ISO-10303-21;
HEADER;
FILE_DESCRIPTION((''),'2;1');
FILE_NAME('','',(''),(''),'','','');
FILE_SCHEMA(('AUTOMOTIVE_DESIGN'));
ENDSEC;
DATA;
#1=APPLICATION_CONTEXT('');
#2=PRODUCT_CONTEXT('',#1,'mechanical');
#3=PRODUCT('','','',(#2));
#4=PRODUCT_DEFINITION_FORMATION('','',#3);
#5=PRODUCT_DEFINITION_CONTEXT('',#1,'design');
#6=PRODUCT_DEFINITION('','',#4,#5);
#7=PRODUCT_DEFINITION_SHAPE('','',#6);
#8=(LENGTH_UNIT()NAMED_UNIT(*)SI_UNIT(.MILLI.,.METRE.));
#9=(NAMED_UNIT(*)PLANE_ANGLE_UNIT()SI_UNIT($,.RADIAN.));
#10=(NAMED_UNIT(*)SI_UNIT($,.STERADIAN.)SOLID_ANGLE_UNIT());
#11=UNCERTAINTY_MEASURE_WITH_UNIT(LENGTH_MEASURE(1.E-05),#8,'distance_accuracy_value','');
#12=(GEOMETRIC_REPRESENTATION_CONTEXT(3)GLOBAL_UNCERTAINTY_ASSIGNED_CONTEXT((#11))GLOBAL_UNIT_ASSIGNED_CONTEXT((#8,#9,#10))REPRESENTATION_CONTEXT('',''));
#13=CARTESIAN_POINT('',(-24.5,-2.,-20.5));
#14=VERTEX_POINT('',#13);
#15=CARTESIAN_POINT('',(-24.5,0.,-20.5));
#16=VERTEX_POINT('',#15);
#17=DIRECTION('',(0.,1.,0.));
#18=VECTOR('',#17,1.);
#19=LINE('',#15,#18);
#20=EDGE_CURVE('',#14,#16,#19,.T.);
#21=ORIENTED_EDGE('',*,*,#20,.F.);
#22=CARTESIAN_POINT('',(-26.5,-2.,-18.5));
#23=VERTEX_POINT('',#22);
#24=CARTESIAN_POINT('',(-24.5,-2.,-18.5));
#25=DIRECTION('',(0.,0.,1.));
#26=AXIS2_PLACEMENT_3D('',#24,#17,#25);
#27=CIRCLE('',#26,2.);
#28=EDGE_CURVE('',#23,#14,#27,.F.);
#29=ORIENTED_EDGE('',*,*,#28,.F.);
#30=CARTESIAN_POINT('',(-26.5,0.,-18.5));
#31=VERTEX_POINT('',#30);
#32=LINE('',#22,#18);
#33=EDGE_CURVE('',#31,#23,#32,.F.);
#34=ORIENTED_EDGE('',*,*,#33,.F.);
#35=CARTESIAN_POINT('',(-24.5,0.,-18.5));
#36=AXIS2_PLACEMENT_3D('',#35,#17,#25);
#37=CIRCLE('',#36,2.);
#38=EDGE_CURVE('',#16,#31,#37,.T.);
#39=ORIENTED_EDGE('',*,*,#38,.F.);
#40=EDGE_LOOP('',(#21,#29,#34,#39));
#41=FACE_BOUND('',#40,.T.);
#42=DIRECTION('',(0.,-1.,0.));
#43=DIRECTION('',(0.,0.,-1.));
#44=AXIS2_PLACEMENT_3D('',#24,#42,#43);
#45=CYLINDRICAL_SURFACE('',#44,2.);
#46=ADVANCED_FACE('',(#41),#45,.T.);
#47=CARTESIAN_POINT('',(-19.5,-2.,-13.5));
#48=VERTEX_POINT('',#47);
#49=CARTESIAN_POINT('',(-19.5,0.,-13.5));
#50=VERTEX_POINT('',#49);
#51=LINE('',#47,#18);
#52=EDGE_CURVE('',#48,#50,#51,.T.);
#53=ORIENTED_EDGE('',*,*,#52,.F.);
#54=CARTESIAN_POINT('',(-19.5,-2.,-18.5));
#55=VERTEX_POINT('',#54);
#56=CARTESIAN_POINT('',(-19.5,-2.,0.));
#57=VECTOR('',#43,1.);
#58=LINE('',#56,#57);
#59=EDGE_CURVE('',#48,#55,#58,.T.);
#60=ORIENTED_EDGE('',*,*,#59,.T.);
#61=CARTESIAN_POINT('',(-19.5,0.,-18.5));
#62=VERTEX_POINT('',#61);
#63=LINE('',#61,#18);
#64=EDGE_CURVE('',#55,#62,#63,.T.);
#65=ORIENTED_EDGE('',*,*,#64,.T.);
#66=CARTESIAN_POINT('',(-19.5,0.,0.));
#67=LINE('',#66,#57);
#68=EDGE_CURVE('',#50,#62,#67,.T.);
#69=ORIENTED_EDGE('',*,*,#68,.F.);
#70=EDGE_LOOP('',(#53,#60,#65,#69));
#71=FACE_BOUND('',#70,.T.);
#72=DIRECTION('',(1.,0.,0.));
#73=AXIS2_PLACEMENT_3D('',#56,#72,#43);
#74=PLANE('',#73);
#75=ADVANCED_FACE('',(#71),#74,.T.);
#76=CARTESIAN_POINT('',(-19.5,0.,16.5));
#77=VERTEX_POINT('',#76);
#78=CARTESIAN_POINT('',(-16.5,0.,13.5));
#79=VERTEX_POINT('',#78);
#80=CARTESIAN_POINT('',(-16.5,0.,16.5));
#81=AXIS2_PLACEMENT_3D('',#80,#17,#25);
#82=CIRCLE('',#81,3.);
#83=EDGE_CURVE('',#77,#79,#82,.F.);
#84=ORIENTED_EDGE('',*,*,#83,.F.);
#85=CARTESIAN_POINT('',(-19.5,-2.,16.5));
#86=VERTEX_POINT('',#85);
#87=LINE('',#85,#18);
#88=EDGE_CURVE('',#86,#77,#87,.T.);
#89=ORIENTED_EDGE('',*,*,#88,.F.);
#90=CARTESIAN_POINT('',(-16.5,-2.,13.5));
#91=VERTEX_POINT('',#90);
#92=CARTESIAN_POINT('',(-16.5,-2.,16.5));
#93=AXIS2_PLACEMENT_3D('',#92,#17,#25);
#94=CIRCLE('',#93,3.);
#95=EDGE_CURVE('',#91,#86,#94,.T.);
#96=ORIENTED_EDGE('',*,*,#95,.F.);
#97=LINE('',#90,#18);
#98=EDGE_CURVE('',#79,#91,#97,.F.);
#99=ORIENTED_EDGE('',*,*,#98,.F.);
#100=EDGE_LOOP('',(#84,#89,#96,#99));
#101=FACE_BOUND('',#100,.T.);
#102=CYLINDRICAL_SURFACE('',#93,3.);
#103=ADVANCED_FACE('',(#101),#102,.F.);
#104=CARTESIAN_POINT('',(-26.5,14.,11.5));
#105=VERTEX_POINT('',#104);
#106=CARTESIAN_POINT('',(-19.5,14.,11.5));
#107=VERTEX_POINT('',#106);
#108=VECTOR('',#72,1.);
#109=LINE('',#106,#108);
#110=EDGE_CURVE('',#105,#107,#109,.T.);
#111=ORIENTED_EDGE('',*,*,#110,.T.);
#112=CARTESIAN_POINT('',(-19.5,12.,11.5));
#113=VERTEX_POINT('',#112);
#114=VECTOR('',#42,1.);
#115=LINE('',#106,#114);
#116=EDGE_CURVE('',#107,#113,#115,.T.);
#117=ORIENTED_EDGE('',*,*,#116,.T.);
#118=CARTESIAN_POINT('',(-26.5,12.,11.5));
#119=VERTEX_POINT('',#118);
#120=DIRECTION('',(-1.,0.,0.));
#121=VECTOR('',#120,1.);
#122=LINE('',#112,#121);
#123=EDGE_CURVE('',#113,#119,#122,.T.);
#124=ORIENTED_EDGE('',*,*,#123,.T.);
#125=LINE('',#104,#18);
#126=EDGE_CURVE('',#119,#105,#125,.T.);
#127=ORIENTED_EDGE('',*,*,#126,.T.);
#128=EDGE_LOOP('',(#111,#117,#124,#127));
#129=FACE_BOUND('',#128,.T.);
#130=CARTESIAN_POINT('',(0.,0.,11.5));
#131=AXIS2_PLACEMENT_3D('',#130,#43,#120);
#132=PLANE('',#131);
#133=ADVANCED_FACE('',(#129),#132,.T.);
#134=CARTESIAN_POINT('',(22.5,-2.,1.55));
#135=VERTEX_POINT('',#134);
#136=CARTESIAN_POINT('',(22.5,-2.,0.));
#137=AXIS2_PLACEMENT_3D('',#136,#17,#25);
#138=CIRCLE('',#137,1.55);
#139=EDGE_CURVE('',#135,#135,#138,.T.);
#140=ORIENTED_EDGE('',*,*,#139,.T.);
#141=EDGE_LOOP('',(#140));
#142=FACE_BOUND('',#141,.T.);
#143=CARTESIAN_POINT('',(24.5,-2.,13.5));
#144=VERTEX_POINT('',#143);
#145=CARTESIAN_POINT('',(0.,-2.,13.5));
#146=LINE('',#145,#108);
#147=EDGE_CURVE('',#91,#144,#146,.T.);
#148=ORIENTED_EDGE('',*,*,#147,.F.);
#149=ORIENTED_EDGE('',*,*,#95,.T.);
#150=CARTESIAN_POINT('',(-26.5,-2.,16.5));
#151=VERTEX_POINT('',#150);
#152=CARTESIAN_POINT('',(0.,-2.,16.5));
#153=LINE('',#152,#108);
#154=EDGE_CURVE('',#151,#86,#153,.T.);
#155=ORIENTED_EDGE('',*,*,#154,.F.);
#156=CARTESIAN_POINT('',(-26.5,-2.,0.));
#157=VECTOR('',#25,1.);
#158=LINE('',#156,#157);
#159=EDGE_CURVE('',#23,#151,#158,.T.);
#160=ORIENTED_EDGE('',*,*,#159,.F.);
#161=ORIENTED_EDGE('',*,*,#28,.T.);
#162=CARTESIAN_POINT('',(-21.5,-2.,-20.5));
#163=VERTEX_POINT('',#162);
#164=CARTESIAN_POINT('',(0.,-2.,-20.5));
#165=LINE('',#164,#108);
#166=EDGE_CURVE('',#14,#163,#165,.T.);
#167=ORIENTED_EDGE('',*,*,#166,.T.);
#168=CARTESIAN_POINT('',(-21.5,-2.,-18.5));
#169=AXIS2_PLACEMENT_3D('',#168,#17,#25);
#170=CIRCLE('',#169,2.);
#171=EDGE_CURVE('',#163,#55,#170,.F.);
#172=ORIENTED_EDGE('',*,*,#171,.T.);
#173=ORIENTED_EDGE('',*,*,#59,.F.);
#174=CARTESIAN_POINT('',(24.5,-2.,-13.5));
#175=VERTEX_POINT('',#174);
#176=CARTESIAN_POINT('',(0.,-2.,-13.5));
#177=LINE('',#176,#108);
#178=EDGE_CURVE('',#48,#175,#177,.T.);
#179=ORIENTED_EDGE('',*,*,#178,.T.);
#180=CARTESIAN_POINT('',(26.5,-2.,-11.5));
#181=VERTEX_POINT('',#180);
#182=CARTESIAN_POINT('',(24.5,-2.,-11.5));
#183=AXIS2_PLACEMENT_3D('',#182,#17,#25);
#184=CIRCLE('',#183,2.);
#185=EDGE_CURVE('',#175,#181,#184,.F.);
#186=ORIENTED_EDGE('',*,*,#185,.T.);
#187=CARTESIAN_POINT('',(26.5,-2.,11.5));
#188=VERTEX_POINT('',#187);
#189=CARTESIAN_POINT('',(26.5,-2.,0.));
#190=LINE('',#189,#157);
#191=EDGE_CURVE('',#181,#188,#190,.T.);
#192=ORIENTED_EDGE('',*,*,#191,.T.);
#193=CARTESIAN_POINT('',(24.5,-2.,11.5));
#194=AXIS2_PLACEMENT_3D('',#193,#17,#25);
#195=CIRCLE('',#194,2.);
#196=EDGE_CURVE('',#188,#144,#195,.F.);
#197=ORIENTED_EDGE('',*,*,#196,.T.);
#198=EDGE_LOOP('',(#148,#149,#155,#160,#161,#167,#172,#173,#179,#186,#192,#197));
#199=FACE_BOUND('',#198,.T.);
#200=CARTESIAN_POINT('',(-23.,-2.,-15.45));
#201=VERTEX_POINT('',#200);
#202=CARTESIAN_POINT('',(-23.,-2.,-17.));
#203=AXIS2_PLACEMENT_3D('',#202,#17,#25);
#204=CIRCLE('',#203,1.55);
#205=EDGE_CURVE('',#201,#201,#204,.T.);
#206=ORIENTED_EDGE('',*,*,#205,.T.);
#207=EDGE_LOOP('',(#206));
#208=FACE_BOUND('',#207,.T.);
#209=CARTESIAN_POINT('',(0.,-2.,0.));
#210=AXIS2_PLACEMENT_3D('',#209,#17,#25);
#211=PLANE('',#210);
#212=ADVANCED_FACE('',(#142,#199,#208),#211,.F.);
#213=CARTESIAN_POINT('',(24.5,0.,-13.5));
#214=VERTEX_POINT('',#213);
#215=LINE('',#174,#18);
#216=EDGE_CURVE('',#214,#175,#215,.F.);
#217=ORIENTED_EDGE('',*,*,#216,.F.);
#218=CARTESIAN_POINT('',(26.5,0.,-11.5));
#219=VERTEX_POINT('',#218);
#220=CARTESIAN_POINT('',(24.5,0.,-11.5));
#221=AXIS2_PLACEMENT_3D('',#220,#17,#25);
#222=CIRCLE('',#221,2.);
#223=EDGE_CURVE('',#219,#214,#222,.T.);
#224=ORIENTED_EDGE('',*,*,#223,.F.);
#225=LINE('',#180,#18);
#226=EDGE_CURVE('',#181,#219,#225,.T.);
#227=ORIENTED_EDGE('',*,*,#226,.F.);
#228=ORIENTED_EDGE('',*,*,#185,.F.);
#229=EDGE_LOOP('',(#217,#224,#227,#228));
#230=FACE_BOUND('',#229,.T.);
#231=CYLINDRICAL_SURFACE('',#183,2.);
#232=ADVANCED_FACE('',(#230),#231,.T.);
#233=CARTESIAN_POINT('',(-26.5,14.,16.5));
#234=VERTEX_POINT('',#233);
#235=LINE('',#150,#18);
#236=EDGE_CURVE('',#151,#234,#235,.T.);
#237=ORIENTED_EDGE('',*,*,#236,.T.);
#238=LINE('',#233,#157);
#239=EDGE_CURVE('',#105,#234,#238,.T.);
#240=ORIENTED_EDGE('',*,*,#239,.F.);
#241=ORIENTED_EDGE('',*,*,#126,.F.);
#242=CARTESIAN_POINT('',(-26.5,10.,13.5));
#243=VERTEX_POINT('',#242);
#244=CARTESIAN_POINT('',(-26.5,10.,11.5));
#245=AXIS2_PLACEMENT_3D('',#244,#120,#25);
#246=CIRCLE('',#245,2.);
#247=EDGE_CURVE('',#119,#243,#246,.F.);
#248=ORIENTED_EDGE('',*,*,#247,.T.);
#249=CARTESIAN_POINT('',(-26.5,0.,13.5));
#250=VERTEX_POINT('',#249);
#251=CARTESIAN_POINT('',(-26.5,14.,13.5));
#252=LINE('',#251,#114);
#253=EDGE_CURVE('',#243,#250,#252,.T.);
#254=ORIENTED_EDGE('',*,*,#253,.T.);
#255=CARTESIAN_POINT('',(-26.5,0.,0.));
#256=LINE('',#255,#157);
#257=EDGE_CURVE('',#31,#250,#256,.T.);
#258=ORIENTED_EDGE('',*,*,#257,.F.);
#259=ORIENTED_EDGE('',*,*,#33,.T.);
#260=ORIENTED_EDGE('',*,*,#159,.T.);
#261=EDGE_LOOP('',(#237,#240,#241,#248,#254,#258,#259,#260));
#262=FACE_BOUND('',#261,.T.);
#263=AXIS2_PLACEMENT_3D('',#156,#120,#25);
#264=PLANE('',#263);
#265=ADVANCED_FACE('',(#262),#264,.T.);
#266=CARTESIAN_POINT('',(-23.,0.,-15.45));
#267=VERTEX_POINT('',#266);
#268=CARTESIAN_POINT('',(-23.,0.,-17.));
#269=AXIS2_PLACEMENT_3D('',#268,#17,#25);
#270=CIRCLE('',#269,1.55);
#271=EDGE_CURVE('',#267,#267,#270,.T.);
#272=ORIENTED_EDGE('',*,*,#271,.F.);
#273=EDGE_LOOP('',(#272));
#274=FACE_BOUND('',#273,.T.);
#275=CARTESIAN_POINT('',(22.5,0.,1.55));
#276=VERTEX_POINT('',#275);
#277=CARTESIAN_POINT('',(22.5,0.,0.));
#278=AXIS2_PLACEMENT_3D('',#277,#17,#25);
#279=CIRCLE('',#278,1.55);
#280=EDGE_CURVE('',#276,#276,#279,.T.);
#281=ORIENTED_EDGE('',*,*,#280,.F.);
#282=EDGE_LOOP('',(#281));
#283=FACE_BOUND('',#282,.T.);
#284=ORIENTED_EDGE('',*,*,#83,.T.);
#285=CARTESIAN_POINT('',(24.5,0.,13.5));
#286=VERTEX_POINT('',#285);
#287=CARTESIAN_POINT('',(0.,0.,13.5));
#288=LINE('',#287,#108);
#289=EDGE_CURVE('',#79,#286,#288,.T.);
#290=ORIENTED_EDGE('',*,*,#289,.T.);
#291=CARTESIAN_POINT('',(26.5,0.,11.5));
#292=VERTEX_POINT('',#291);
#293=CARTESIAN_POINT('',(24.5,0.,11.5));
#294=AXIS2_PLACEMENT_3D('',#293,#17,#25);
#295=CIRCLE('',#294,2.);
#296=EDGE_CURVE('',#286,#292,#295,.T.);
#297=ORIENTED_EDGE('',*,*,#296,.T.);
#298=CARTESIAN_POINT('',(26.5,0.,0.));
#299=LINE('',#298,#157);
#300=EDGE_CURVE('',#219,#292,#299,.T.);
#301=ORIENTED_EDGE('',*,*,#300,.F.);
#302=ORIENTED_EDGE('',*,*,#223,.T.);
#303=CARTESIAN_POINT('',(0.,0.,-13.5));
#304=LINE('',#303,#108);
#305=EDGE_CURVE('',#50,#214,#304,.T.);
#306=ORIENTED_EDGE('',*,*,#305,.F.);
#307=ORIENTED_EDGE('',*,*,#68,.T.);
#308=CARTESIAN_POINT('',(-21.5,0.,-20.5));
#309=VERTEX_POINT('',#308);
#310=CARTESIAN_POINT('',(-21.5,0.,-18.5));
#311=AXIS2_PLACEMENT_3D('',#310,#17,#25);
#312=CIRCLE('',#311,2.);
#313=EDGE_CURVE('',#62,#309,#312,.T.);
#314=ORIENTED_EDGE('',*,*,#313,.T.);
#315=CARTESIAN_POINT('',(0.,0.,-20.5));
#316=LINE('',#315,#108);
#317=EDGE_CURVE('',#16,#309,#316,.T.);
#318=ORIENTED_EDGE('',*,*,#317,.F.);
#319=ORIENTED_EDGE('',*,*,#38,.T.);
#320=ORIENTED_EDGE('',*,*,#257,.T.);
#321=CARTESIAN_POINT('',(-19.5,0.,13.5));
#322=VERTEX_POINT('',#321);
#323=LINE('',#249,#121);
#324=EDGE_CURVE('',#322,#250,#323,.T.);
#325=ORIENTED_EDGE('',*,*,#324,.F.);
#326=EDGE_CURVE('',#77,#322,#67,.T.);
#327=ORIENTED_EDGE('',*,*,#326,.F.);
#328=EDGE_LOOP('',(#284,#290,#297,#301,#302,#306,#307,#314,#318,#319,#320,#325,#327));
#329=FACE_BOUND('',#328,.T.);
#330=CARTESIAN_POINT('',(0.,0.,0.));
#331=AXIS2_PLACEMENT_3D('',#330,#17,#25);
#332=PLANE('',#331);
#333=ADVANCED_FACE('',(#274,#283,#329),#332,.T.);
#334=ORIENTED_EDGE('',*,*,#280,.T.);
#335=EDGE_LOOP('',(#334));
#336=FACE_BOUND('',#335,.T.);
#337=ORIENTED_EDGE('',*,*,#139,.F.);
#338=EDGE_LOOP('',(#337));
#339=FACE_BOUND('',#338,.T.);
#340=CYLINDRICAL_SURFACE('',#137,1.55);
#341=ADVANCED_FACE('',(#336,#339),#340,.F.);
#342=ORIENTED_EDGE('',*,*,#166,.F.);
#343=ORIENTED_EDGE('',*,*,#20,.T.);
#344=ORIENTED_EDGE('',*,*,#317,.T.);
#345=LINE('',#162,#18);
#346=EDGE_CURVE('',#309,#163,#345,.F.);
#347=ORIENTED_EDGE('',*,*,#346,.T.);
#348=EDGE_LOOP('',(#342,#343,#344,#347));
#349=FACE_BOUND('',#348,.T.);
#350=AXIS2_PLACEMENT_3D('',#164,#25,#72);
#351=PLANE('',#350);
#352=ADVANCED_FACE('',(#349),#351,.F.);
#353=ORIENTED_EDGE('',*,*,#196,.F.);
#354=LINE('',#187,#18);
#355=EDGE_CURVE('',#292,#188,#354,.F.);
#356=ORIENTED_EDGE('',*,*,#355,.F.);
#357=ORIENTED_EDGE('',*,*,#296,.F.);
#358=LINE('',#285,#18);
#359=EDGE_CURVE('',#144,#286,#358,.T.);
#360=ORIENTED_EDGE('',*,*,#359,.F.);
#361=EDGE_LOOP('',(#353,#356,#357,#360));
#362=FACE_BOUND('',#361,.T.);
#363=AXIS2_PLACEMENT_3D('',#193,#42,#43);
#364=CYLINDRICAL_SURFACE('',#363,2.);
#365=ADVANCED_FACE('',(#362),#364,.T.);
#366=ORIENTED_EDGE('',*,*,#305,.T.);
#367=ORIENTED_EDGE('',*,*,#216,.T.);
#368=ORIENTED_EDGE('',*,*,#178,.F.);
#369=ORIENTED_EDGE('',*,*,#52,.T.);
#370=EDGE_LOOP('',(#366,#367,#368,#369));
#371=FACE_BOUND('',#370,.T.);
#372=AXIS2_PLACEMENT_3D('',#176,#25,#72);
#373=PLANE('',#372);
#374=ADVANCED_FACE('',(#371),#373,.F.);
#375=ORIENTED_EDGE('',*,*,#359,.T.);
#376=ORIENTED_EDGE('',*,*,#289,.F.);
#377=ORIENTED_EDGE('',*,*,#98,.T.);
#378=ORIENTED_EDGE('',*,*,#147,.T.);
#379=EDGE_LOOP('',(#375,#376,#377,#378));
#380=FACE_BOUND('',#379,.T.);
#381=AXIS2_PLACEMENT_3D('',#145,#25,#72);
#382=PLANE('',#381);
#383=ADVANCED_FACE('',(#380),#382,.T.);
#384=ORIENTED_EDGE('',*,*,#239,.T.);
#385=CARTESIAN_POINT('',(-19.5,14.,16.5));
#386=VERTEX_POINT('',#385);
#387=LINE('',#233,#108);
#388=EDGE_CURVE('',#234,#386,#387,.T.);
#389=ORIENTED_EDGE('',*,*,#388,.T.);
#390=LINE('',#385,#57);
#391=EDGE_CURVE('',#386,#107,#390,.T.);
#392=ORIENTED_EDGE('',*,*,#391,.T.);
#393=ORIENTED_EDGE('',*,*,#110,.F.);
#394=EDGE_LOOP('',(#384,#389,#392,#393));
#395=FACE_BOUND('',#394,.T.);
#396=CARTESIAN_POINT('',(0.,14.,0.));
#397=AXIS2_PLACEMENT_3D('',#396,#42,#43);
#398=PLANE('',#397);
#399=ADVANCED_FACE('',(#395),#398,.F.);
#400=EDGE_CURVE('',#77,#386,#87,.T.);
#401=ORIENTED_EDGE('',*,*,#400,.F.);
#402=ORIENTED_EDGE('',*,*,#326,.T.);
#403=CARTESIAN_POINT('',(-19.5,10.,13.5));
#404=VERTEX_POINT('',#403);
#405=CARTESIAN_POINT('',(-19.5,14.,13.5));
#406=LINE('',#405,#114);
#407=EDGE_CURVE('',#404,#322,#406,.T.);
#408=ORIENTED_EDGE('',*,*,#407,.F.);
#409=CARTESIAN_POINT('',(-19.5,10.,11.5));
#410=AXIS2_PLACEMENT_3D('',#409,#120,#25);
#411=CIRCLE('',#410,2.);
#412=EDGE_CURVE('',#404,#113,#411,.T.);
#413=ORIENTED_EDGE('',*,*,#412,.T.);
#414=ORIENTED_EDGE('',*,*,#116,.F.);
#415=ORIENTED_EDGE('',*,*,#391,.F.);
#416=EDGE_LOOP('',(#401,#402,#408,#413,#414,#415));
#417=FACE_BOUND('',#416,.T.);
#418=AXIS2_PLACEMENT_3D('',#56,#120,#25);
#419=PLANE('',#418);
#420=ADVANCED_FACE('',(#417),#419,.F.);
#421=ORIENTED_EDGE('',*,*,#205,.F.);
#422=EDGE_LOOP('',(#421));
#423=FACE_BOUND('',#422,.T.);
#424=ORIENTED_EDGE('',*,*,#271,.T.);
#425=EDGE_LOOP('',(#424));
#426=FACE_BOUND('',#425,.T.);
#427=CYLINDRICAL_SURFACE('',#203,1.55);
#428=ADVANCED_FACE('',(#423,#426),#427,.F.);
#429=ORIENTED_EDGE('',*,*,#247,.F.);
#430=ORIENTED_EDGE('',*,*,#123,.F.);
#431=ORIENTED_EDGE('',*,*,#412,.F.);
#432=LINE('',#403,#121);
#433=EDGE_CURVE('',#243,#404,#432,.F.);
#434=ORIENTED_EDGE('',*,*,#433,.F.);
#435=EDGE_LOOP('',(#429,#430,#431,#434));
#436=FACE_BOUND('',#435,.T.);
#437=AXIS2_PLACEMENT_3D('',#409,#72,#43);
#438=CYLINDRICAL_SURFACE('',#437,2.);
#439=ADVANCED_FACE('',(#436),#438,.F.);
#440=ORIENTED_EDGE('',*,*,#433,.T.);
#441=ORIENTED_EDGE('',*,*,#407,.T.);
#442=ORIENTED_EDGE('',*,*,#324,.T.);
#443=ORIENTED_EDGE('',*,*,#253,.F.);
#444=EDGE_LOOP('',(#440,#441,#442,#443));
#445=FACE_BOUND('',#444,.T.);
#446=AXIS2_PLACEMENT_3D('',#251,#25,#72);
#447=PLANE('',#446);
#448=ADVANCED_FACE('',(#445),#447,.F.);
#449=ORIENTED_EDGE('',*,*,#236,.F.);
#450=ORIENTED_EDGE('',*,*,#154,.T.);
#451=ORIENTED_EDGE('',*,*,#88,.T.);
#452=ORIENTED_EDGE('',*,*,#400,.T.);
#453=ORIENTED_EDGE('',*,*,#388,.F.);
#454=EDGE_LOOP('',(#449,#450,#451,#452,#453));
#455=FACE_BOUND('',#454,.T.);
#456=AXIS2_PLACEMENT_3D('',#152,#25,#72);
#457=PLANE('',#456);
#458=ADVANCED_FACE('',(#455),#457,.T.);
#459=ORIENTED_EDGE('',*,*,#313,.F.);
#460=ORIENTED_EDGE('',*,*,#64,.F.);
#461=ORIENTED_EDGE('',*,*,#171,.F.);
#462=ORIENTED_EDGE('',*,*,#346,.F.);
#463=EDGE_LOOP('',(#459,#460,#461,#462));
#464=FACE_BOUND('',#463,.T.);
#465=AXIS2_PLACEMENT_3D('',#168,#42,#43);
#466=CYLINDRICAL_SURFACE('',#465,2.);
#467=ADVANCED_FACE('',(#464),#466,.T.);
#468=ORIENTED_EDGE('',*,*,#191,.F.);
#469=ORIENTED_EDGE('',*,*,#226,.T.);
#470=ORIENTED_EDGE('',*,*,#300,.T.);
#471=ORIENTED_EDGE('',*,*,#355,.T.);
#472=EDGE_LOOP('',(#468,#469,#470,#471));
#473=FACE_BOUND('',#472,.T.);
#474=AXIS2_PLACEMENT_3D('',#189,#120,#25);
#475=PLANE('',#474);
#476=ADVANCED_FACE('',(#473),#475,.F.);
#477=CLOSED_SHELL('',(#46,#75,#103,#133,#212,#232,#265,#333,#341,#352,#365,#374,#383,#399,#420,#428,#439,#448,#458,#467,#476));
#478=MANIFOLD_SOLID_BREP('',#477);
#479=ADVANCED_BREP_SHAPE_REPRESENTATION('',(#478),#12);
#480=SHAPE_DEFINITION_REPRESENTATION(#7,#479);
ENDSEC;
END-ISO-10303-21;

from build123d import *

# Parameters (mm, degrees)
ESBO_O1_W                = 7
ESBO_O1_H                = 3
ESBO_O1_W_2              = 53
ESBO_O1_H_2              = 27
ESBO_O1_H_3              = 7
ESBO_O1_R                = 1.55
RESSALTO_EXTRUS_O1_DEPTH = 2
ESBO_O2_W                = 7
ESBO_O2_H                = 3
RESSALTO_EXTRUS_O2_DEPTH = 14
ESBO_O3_W                = 7
ESBO_O3_H                = 2
RESSALTO_EXTRUS_O3_DEPTH = 2
FILETE1_R                = 2
FILETE2_R                = 3
ESBO_O4_R                = 1.55
CORTE_EXTRUS_O1_DEPTH    = 2
FILETE3_R                = 2


with BuildPart() as part:
    # Esboço1 → Ressalto-extrusão1 (new body)
    # profile 1 of 3: a face of its own
    with BuildSketch(Plane(origin=(0, 0, 0), x_dir=(1, 0, 0), z_dir=(0, 1, 0))):
        with Locations((-23, -15)):
            Rectangle(ESBO_O1_W, ESBO_O1_H)
    # profile 2 of 3: a face of its own
    with BuildSketch(Plane(origin=(0, 0, 0), x_dir=(1, 0, 0), z_dir=(0, 1, 0))):
        Rectangle(ESBO_O1_W_2, ESBO_O1_H_2)
    # profile 3 of 3: a face of its own
    with BuildSketch(Plane(origin=(0, 0, 0), x_dir=(1, 0, 0), z_dir=(0, 1, 0))):
        with Locations((-23, 17)):
            Rectangle(ESBO_O1_W, ESBO_O1_H_3)
        with Locations(Location((-23, 17, 0), (0, 0, 270))):
            Circle(ESBO_O1_R, mode=Mode.SUBTRACT)
    extrude(amount=-RESSALTO_EXTRUS_O1_DEPTH)

    # Esboço2 → Ressalto-extrusão2 (add)
    with BuildSketch(Plane(origin=(0, 0, 0), x_dir=(1, 0, 0), z_dir=(0, 1, 0))):
        with Locations((-23, -15)):
            Rectangle(ESBO_O2_W, ESBO_O2_H)
    extrude(amount=RESSALTO_EXTRUS_O2_DEPTH)

    # Esboço3 → Ressalto-extrusão3 (add)
    with BuildSketch(Plane(origin=(0, 0, 13.5), x_dir=(-1, 0, 0), z_dir=(0, 0, -1))):
        with Locations((23, 13)):
            Rectangle(ESBO_O3_W, ESBO_O3_H)
    extrude(amount=RESSALTO_EXTRUS_O3_DEPTH)

    # Filete1
    filete1_edges = [part.edges().sort_by_distance(p)[0] for p in [
        (-23, 12, 13.5),
    ]]
    fillet(filete1_edges, radius=FILETE1_R - 0.0001)  # a hair under: the kernel refuses the full size

    # Filete2
    filete2_edges = [part.edges().sort_by_distance(p)[0] for p in [
        (-19.5, -1, 13.5),
    ]]
    fillet(filete2_edges, radius=FILETE2_R - 0.0001)  # a hair under: the kernel refuses the full size

    # Esboço4 → Corte-extrusão1 (cut)
    with BuildSketch(Plane(origin=(0, 0, 0), x_dir=(1, 0, 0), z_dir=(0, 1, 0))):
        with Locations(Location((22.5, 0, 0), (0, 0, 270))):
            Circle(ESBO_O4_R)
    extrude(amount=-CORTE_EXTRUS_O1_DEPTH, mode=Mode.SUBTRACT)

    # Filete3
    filete3_edges = [part.edges().sort_by_distance(p)[0] for p in [
        (-26.5, -1, -20.5),
        (-19.5, -1, -20.5),
        (26.5, -1, -13.5),
        (26.5, -1, 13.5),
    ]]
    fillet(filete3_edges, radius=FILETE3_R)


solid = part.part
